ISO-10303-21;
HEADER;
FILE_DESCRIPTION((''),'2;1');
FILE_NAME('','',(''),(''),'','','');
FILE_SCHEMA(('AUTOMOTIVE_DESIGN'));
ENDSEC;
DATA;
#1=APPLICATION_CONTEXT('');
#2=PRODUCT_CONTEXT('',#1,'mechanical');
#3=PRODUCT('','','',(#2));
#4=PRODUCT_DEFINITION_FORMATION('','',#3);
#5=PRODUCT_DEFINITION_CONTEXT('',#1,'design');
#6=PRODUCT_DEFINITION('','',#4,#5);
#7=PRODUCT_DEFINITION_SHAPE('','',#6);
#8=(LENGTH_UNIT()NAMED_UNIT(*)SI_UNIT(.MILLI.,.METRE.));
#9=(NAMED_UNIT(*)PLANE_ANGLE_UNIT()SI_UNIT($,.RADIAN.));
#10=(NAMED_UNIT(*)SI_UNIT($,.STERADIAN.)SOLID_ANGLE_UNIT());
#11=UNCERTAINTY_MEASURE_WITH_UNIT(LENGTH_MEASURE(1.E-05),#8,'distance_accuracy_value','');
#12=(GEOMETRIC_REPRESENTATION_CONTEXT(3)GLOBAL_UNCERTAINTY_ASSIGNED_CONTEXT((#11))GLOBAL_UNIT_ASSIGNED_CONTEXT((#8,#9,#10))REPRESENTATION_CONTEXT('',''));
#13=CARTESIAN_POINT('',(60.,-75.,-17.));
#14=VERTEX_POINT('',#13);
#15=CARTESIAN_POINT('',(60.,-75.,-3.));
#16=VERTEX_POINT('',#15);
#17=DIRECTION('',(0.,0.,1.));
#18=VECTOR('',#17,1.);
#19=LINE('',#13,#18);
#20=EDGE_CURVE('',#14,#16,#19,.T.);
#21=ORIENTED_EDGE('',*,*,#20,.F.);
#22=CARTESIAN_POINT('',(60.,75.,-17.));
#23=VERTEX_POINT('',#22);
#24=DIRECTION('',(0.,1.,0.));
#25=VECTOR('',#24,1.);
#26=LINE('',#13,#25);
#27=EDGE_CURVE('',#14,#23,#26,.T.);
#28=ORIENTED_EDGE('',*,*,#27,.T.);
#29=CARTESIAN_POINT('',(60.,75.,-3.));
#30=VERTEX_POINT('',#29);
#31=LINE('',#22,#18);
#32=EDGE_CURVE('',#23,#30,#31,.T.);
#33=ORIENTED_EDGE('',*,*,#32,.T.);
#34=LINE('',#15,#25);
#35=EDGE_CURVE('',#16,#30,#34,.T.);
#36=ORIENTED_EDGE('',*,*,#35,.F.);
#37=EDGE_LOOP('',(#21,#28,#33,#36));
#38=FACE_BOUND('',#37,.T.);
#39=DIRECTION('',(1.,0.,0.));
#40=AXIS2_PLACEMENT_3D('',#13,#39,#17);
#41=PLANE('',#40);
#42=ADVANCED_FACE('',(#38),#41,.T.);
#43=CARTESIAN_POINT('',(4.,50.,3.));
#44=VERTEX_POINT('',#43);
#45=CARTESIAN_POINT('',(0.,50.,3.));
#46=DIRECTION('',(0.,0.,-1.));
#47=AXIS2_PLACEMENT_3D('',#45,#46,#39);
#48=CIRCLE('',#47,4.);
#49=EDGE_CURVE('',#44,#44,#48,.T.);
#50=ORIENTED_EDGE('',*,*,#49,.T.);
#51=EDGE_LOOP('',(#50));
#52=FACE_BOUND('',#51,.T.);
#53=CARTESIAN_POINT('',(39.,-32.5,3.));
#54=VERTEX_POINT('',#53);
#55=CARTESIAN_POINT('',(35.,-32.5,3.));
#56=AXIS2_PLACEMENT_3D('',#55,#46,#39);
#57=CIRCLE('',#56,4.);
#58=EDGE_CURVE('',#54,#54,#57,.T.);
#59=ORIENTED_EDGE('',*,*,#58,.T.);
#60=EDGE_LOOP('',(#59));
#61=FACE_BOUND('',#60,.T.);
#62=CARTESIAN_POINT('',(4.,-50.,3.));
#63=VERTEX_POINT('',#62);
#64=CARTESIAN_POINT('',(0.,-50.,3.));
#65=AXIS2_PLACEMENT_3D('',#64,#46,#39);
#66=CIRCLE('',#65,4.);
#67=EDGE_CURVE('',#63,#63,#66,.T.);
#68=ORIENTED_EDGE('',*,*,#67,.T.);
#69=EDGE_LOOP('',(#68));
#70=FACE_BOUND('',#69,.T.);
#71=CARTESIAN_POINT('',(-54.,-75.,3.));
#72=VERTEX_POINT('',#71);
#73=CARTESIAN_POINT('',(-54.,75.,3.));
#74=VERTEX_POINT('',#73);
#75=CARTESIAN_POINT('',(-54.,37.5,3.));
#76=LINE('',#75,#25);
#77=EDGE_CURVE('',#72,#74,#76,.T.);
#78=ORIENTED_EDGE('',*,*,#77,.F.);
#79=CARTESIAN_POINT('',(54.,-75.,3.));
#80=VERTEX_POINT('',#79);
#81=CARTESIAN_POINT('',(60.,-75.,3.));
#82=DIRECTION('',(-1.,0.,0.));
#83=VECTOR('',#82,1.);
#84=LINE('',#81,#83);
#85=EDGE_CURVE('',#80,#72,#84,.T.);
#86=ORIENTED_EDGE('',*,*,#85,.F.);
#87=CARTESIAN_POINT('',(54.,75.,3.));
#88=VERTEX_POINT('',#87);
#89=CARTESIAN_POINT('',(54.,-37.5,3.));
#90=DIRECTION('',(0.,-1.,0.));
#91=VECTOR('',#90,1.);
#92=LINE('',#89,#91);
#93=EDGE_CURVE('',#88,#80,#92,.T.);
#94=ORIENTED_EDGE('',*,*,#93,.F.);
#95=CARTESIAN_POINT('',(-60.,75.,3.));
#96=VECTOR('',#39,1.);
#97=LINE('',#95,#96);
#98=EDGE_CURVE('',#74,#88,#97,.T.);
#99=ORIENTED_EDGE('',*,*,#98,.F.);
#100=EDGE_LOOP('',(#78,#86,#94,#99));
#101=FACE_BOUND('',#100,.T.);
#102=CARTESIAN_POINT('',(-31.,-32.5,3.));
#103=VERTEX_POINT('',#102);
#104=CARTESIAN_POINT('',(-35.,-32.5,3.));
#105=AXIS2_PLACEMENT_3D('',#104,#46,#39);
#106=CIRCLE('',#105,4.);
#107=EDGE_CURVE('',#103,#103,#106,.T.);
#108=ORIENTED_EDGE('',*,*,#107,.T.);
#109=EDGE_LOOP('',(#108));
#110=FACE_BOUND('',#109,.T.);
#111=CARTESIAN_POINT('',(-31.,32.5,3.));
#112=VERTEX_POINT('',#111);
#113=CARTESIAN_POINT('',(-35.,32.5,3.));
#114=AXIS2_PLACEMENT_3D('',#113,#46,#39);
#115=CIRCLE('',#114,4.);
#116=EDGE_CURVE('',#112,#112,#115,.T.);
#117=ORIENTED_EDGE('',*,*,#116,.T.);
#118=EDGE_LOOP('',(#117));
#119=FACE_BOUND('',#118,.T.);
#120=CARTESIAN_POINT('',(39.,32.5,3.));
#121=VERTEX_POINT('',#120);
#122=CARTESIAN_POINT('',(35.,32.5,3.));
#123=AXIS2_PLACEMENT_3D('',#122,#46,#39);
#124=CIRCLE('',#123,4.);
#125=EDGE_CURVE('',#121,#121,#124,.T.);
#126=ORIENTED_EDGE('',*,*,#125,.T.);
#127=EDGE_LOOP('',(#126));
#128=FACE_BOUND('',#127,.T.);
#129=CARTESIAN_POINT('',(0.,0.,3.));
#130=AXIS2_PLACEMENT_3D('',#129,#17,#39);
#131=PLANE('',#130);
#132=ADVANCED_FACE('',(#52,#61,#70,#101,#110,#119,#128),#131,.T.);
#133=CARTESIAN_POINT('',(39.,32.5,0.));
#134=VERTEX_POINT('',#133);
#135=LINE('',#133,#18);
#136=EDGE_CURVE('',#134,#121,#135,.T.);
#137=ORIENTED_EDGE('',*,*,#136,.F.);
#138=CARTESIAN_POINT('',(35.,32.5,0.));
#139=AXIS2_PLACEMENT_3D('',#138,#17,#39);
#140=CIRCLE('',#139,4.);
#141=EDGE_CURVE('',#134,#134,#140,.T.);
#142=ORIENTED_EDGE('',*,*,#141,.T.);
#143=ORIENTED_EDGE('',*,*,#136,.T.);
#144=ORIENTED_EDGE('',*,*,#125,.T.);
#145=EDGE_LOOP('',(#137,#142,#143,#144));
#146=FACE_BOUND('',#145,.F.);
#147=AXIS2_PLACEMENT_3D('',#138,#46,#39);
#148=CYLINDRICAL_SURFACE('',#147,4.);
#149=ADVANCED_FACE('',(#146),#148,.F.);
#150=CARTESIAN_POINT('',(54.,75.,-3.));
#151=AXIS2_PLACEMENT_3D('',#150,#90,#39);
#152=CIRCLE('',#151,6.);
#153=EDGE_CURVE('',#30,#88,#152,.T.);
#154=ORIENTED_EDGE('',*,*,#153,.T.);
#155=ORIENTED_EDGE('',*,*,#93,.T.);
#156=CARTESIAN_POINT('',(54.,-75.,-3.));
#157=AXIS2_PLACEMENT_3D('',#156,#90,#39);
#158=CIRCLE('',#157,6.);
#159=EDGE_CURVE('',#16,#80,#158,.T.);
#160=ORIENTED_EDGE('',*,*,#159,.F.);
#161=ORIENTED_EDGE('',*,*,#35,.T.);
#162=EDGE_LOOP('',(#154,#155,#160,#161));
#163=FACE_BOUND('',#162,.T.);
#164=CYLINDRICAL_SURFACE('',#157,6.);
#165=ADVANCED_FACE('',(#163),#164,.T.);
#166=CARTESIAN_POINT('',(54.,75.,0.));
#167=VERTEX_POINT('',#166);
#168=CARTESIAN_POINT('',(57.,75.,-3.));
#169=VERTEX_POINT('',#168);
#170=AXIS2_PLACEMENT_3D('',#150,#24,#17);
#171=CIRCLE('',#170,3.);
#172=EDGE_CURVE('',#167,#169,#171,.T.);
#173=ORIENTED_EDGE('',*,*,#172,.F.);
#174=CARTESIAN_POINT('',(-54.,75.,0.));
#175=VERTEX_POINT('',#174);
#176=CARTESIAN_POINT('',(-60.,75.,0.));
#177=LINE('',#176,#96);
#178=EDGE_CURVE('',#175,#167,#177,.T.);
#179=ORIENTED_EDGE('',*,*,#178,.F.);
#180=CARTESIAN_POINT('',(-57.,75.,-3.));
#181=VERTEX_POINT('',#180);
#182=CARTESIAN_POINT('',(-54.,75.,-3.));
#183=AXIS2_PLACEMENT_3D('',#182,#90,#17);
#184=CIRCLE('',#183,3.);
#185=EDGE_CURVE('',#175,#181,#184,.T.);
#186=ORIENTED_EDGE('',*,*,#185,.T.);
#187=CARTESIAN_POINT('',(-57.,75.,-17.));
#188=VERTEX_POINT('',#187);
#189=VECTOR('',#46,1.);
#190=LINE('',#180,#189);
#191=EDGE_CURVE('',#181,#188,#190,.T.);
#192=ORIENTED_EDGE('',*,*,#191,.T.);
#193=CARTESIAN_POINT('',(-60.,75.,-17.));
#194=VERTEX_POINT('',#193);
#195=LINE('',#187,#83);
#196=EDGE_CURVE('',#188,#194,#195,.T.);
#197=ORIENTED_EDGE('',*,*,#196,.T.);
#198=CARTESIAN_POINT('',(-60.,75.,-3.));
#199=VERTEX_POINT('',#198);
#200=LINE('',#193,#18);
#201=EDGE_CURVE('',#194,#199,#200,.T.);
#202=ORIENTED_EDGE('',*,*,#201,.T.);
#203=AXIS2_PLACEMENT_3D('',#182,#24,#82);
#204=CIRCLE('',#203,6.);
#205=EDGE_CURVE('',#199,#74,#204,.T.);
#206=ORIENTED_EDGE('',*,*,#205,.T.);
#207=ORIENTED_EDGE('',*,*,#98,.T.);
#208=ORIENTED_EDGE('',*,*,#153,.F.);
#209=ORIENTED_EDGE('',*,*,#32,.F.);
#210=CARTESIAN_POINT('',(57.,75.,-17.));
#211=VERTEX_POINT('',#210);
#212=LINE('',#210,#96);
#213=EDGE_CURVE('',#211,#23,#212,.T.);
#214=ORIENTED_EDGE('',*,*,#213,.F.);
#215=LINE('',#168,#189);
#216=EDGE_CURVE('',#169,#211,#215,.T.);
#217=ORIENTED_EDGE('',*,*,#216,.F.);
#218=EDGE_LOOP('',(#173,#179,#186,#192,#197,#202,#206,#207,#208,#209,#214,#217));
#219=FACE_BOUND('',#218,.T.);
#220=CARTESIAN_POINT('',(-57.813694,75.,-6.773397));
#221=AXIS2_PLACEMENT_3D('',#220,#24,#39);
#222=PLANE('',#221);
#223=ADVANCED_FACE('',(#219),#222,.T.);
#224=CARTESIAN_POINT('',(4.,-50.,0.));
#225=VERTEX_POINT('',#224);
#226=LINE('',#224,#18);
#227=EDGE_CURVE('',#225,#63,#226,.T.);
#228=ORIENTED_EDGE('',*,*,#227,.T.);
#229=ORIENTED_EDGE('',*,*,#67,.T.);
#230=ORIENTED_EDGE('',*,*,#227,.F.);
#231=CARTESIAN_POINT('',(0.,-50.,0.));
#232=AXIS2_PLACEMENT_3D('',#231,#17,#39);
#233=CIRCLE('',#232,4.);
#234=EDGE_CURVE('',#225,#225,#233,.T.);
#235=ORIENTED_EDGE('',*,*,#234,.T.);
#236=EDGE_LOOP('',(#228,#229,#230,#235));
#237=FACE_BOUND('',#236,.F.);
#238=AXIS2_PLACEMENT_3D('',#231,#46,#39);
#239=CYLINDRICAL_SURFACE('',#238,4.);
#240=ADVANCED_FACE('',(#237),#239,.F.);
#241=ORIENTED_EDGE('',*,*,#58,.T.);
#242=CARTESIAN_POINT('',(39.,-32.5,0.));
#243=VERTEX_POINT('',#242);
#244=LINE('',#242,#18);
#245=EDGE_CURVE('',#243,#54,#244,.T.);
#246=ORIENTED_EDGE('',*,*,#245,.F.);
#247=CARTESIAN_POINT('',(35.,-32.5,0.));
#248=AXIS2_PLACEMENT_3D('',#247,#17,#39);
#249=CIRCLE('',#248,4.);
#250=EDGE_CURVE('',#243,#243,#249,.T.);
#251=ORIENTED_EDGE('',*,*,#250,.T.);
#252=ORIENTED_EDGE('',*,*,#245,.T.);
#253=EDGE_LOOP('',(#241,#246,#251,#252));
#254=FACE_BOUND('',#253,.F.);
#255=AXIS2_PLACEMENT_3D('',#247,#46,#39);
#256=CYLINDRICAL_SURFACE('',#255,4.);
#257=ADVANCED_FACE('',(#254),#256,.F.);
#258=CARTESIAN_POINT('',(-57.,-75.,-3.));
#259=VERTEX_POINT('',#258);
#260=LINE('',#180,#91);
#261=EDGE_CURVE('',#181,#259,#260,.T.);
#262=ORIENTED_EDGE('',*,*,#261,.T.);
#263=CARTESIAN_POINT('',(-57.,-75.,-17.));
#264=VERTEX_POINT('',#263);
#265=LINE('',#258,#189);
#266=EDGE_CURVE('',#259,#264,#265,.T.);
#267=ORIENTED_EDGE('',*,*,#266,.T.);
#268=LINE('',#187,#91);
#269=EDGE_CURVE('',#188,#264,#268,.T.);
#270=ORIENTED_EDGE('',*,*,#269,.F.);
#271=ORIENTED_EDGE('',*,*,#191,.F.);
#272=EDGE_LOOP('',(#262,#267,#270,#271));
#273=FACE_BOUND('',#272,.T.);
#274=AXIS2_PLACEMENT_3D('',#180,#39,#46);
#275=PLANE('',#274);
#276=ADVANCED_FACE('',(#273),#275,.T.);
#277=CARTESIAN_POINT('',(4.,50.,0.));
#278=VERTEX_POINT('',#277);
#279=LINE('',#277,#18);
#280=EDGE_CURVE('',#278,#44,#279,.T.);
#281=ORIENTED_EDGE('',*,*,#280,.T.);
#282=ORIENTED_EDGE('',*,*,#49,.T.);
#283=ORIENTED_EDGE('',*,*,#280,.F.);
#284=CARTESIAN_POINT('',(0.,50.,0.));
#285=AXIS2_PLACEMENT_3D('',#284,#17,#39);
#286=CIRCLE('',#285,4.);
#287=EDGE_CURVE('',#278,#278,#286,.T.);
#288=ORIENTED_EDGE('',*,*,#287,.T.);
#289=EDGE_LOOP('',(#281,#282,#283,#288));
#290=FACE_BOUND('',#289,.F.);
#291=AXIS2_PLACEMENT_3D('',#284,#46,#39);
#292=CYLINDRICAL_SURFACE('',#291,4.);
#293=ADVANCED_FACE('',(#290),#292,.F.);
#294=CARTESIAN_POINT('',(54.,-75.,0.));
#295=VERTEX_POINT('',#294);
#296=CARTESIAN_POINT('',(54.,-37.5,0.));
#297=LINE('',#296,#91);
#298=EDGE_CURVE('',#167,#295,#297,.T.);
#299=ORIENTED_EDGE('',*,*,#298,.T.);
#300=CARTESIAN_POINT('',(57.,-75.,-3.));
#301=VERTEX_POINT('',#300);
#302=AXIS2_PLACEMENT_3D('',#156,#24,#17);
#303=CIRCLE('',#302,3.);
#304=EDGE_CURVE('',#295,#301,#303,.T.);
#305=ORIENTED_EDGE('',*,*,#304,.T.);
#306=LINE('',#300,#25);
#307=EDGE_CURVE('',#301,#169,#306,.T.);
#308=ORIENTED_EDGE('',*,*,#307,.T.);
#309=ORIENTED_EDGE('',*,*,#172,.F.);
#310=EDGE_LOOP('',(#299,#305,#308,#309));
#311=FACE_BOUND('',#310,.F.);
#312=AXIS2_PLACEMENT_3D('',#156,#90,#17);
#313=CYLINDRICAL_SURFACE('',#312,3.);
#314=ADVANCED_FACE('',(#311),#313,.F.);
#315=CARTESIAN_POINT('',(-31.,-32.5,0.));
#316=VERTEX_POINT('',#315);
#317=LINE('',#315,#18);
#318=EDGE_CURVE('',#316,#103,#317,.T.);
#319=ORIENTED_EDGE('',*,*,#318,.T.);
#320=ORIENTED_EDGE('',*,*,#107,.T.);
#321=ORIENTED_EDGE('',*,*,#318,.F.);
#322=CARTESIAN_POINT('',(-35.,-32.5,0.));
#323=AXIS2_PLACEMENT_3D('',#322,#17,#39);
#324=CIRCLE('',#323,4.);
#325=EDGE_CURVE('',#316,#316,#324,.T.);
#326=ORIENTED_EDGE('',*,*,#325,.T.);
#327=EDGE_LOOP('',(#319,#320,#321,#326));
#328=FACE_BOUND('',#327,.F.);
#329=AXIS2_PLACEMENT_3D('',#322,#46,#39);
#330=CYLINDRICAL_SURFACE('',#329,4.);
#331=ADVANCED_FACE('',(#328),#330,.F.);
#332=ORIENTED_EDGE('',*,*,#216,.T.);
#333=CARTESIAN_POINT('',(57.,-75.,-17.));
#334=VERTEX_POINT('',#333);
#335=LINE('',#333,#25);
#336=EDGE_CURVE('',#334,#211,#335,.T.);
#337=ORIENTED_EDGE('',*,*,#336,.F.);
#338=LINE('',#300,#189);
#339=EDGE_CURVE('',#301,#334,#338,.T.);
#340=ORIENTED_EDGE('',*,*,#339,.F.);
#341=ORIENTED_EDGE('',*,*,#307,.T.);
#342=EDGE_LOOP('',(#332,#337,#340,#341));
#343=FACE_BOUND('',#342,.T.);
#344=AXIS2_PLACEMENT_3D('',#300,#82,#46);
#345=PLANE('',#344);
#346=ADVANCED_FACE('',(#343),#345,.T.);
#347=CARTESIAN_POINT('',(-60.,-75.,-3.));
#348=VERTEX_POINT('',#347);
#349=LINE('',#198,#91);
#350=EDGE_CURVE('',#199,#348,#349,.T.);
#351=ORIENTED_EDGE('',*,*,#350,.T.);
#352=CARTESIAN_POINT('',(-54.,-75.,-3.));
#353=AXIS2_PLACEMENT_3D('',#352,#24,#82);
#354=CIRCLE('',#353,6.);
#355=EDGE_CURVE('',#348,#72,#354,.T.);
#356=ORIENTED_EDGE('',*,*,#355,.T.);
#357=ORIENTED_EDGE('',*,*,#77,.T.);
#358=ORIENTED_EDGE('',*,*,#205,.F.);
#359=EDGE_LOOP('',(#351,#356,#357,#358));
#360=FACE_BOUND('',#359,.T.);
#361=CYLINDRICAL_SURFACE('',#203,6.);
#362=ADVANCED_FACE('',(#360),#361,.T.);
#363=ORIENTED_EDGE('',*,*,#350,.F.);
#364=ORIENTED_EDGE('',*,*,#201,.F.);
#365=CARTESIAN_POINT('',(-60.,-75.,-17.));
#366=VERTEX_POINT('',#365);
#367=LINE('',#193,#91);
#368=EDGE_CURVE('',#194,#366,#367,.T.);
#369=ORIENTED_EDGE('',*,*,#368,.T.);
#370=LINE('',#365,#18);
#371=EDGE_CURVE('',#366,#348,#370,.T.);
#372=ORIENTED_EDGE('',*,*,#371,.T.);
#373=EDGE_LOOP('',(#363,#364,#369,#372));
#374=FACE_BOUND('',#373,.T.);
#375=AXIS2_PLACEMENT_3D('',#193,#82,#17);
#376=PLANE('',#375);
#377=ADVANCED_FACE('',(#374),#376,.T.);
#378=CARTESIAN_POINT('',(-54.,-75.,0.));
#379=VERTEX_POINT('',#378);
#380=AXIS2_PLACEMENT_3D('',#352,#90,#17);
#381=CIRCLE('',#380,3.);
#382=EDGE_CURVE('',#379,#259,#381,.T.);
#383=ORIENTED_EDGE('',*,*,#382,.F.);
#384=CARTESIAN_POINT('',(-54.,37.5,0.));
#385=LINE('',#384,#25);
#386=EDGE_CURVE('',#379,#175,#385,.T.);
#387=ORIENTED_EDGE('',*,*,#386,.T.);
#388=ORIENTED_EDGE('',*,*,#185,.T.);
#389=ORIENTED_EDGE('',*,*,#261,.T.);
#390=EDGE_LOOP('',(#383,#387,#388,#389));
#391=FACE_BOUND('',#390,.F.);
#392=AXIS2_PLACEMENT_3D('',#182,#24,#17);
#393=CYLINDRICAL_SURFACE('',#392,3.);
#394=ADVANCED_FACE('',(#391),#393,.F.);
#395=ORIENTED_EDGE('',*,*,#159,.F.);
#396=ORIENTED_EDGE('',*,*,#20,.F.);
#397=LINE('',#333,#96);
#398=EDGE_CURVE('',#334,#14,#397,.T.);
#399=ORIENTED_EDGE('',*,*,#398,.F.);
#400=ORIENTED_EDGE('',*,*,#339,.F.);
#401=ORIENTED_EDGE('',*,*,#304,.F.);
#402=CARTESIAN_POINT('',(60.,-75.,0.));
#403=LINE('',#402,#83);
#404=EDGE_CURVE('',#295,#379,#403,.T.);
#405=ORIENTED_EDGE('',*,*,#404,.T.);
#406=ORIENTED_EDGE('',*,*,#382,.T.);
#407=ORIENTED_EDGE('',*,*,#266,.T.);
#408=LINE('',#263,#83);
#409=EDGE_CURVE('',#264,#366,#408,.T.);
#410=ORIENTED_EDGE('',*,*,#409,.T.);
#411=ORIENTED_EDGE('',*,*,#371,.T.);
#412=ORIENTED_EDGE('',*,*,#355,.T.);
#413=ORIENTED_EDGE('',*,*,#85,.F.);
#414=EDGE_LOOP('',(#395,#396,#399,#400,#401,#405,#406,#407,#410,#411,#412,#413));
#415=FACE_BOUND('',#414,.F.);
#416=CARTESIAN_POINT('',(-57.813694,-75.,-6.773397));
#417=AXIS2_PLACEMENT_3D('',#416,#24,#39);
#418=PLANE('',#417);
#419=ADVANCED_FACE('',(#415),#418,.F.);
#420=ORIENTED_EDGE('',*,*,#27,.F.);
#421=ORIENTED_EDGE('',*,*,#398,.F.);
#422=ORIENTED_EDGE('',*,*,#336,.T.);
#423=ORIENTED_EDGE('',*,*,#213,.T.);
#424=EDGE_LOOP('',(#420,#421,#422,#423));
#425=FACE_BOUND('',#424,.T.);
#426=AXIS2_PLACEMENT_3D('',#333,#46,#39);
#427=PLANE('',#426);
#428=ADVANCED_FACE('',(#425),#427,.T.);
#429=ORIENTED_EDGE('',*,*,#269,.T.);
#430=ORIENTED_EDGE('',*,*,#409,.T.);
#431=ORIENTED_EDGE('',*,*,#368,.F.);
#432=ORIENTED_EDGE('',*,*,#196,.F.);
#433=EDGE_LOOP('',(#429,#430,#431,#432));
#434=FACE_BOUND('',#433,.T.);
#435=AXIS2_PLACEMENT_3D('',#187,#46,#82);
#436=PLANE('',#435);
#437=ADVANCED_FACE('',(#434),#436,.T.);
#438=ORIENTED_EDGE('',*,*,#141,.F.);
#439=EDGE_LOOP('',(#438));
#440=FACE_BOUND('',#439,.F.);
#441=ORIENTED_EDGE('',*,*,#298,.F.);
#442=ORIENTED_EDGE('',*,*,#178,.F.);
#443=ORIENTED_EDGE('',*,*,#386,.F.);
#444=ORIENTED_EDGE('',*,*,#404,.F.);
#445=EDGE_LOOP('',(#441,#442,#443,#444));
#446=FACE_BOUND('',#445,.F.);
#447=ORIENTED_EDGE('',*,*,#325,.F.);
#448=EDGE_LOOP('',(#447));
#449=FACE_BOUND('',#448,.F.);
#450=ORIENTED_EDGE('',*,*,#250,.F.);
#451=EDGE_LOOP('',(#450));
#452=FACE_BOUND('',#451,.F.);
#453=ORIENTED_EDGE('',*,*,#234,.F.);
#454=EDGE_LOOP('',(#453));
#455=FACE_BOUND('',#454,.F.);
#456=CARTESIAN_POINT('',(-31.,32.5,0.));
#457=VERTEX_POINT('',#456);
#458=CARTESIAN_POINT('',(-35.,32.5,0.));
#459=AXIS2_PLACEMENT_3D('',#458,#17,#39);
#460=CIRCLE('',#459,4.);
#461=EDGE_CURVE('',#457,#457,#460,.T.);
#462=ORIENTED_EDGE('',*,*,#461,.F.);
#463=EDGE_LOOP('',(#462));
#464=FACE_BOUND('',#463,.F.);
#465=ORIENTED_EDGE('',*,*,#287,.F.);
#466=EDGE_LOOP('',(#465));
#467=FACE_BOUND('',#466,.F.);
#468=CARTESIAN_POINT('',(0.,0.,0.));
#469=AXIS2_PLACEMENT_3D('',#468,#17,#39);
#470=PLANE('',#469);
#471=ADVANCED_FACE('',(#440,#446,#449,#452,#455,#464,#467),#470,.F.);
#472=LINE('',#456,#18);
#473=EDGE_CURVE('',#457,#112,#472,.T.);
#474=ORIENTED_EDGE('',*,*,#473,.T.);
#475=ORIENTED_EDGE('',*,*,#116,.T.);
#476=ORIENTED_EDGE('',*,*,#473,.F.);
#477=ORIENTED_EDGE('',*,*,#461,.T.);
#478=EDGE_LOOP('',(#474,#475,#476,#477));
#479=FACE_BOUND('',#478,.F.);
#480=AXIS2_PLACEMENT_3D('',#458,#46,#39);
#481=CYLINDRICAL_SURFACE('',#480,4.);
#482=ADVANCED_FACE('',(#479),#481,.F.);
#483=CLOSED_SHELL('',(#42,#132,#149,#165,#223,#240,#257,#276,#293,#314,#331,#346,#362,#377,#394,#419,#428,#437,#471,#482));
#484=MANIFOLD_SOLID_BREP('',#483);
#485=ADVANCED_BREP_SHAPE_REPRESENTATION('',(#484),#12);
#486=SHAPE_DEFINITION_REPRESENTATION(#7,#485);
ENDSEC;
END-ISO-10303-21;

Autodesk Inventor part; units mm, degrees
ref_plane "YZ Plane" through (0, 0, 0) normal (1, 0, 0) x (0, 1, 0)
ref_plane "XZ Plane" through (0, 0, 0) normal (0, 1, 0) x (-1, 0, 0)
ref_plane "XY Plane" through (0, 0, 0) normal (0, 0, 1) x (1, 0, 0)
sketch "Sketch1" plane through (0, 0, 0) normal (0, 0, 1) x (1, 0, 0)
  line L0 (60, -75) -> (-60, -75)
  line L1 (-60, -75) -> (-60, 75)
  line L2 (-60, 75) -> (60, 75)
  line L3 (60, 75) -> (60, -75)
  line L4 (60, 75) -> (-60, -75) construction
  point P0 (0, 0)
  point P1 (0, 0)
  dimension "d1" = 150
  dimension "d2" = 120
extrude "Plate1" add sketch "Sketch1" along normal blind 3
sketch "Sketch2" plane through (0, 0, 0) normal (0, 0, 1) x (1, 0, 0)
  circle A0 centre (0, 0) radius 17.5
  line L0 (35, -32.5) -> (-35, -32.5) construction
  line L1 (-35, -32.5) -> (-35, 32.5) construction
  line L2 (-35, 32.5) -> (35, 32.5) construction
  line L3 (35, 32.5) -> (35, -32.5) construction
  line L4 (35, -32.5) -> (-35, 32.5) construction
  line L5 (-35, -32.5) -> (35, 32.5) construction
  circle A1 centre (-35, -32.5) radius 4
  circle A2 centre (35, -32.5) radius 4
  circle A3 centre (35, 32.5) radius 4
  circle A4 centre (-35, 32.5) radius 4
  circle A5 centre (0, 50) radius 4
  circle A6 centre (0, -50) radius 4
  line L6 (35, 0) -> (-35, 0) construction
  point P0 (75, 0)
  point P1 (0, 0)
  dimension "d3" = 35
  dimension "d4" = 70
  dimension "d5" = 65
  dimension "d7" = 8
  dimension "d32" = 100
extrude "Extrusion1" cut sketch "Sketch2" along normal through all contours A1 | A2 | A3 | A4 | A5 | A6
sketch "Sketch3" plane through (-57, 75, 3) normal (-1, 0, 0) x (0, -1, 0)
  line L0 (150, 0) -> (0, 0)
  line L1 (0, 0) -> (0, -20)
  line L2 (0, -20) -> (150, -20)
  line L3 (150, -20) -> (150, 0)
edge flange "Flange1" height 20 angle 90 thickness 3 bend radius 3 thickness toward (-1, 0, 0) relief tear relief width 3 relief depth 1.5 corner gap 3 corner form 0 edges at (-60, 0, 0) (60, 0, 0) wall of the first edge with corners at (-57, -75, 3) (-57, 75, 3) (-57, 75, -17) (-57, -75, -17)
bend "Bend1"
corner "Corner1"
sketch "Sketch4" plane through (0, 0, 0) normal (0, 0, 1) x (1, 0, 0)
  circle A0 centre (0, 75) radius 17.5 projected
  line L0 (0, 125) -> (0, 105) construction
  line L1 (-3, 125) -> (-3, 105)
  line L2 (3, 105) -> (3, 125)
  arc A1 (3, 125) -> (-3, 125) centre (0, 125) ccw
  arc A2 (-3, 105) -> (3, 105) centre (0, 105) ccw
  arc A3 (34.641, 95) -> (20, 109.641) centre (0, 75) ccw construction
  arc A4 (37.2391, 96.5) -> (21.5, 112.2391) centre (0, 75) ccw
  arc A5 (32.0429, 93.5) -> (18.5, 107.0429) centre (0, 75) ccw
  arc A6 (32.0429, 93.5) -> (37.2391, 96.5) centre (34.641, 95) ccw
  arc A7 (21.5, 112.2391) -> (18.5, 107.0429) centre (20, 109.641) ccw
  line L3 (0, 75) -> (20, 109.641) construction
  line L4 (0, 75) -> (40, 75) construction
  line L5 (0, 75) -> (34.641, 95) construction
  point P0 (0, 0)
  point P1 (0, 115)
  dimension "d20" = 20
  dimension "d21" = 6
  dimension "d22" = 30
  dimension "d23" = 60
  dimension "d24" = 30
  dimension "d25" = 6
  dimension "d26" = 40
extrude "Extrusion2" [suppressed]
pattern_circular "Circular Pattern1" [suppressed]
equation "\"d0\" = Thickness"
equation "\"d10\" = BendReliefWidth"
equation "\"d11\" = BendReliefDepth"
equation "\"d12\" = MinimumRemnant"
equation "\"d13\" = TransitionRadius"
equation "\"d16\" = BendRadius"
equation "\"d17\" = CornerReliefSize"
equation "\"d18\" = GapSize"
equation "\"d19\" = JacobiRadiusSize"
equation "\"BendRadius\" = Thickness"
equation "\"BendReliefWidth\" = Thickness"
equation "\"BendReliefDepth\" = 0.5 * Thickness"
equation "\"CornerReliefSize\" = 4 * Thickness"
equation "\"MinimumRemnant\" = 2 * Thickness"
equation "\"TransitionRadius\" = BendRadius"
equation "\"JacobiRadiusSize\" = BendRadius"
equation "\"GapSize\" = Thickness"
equation "\"Thickness\" = 3"
properties part number "FL3.6.2  Motor pillar" material "Stainless Steel"
